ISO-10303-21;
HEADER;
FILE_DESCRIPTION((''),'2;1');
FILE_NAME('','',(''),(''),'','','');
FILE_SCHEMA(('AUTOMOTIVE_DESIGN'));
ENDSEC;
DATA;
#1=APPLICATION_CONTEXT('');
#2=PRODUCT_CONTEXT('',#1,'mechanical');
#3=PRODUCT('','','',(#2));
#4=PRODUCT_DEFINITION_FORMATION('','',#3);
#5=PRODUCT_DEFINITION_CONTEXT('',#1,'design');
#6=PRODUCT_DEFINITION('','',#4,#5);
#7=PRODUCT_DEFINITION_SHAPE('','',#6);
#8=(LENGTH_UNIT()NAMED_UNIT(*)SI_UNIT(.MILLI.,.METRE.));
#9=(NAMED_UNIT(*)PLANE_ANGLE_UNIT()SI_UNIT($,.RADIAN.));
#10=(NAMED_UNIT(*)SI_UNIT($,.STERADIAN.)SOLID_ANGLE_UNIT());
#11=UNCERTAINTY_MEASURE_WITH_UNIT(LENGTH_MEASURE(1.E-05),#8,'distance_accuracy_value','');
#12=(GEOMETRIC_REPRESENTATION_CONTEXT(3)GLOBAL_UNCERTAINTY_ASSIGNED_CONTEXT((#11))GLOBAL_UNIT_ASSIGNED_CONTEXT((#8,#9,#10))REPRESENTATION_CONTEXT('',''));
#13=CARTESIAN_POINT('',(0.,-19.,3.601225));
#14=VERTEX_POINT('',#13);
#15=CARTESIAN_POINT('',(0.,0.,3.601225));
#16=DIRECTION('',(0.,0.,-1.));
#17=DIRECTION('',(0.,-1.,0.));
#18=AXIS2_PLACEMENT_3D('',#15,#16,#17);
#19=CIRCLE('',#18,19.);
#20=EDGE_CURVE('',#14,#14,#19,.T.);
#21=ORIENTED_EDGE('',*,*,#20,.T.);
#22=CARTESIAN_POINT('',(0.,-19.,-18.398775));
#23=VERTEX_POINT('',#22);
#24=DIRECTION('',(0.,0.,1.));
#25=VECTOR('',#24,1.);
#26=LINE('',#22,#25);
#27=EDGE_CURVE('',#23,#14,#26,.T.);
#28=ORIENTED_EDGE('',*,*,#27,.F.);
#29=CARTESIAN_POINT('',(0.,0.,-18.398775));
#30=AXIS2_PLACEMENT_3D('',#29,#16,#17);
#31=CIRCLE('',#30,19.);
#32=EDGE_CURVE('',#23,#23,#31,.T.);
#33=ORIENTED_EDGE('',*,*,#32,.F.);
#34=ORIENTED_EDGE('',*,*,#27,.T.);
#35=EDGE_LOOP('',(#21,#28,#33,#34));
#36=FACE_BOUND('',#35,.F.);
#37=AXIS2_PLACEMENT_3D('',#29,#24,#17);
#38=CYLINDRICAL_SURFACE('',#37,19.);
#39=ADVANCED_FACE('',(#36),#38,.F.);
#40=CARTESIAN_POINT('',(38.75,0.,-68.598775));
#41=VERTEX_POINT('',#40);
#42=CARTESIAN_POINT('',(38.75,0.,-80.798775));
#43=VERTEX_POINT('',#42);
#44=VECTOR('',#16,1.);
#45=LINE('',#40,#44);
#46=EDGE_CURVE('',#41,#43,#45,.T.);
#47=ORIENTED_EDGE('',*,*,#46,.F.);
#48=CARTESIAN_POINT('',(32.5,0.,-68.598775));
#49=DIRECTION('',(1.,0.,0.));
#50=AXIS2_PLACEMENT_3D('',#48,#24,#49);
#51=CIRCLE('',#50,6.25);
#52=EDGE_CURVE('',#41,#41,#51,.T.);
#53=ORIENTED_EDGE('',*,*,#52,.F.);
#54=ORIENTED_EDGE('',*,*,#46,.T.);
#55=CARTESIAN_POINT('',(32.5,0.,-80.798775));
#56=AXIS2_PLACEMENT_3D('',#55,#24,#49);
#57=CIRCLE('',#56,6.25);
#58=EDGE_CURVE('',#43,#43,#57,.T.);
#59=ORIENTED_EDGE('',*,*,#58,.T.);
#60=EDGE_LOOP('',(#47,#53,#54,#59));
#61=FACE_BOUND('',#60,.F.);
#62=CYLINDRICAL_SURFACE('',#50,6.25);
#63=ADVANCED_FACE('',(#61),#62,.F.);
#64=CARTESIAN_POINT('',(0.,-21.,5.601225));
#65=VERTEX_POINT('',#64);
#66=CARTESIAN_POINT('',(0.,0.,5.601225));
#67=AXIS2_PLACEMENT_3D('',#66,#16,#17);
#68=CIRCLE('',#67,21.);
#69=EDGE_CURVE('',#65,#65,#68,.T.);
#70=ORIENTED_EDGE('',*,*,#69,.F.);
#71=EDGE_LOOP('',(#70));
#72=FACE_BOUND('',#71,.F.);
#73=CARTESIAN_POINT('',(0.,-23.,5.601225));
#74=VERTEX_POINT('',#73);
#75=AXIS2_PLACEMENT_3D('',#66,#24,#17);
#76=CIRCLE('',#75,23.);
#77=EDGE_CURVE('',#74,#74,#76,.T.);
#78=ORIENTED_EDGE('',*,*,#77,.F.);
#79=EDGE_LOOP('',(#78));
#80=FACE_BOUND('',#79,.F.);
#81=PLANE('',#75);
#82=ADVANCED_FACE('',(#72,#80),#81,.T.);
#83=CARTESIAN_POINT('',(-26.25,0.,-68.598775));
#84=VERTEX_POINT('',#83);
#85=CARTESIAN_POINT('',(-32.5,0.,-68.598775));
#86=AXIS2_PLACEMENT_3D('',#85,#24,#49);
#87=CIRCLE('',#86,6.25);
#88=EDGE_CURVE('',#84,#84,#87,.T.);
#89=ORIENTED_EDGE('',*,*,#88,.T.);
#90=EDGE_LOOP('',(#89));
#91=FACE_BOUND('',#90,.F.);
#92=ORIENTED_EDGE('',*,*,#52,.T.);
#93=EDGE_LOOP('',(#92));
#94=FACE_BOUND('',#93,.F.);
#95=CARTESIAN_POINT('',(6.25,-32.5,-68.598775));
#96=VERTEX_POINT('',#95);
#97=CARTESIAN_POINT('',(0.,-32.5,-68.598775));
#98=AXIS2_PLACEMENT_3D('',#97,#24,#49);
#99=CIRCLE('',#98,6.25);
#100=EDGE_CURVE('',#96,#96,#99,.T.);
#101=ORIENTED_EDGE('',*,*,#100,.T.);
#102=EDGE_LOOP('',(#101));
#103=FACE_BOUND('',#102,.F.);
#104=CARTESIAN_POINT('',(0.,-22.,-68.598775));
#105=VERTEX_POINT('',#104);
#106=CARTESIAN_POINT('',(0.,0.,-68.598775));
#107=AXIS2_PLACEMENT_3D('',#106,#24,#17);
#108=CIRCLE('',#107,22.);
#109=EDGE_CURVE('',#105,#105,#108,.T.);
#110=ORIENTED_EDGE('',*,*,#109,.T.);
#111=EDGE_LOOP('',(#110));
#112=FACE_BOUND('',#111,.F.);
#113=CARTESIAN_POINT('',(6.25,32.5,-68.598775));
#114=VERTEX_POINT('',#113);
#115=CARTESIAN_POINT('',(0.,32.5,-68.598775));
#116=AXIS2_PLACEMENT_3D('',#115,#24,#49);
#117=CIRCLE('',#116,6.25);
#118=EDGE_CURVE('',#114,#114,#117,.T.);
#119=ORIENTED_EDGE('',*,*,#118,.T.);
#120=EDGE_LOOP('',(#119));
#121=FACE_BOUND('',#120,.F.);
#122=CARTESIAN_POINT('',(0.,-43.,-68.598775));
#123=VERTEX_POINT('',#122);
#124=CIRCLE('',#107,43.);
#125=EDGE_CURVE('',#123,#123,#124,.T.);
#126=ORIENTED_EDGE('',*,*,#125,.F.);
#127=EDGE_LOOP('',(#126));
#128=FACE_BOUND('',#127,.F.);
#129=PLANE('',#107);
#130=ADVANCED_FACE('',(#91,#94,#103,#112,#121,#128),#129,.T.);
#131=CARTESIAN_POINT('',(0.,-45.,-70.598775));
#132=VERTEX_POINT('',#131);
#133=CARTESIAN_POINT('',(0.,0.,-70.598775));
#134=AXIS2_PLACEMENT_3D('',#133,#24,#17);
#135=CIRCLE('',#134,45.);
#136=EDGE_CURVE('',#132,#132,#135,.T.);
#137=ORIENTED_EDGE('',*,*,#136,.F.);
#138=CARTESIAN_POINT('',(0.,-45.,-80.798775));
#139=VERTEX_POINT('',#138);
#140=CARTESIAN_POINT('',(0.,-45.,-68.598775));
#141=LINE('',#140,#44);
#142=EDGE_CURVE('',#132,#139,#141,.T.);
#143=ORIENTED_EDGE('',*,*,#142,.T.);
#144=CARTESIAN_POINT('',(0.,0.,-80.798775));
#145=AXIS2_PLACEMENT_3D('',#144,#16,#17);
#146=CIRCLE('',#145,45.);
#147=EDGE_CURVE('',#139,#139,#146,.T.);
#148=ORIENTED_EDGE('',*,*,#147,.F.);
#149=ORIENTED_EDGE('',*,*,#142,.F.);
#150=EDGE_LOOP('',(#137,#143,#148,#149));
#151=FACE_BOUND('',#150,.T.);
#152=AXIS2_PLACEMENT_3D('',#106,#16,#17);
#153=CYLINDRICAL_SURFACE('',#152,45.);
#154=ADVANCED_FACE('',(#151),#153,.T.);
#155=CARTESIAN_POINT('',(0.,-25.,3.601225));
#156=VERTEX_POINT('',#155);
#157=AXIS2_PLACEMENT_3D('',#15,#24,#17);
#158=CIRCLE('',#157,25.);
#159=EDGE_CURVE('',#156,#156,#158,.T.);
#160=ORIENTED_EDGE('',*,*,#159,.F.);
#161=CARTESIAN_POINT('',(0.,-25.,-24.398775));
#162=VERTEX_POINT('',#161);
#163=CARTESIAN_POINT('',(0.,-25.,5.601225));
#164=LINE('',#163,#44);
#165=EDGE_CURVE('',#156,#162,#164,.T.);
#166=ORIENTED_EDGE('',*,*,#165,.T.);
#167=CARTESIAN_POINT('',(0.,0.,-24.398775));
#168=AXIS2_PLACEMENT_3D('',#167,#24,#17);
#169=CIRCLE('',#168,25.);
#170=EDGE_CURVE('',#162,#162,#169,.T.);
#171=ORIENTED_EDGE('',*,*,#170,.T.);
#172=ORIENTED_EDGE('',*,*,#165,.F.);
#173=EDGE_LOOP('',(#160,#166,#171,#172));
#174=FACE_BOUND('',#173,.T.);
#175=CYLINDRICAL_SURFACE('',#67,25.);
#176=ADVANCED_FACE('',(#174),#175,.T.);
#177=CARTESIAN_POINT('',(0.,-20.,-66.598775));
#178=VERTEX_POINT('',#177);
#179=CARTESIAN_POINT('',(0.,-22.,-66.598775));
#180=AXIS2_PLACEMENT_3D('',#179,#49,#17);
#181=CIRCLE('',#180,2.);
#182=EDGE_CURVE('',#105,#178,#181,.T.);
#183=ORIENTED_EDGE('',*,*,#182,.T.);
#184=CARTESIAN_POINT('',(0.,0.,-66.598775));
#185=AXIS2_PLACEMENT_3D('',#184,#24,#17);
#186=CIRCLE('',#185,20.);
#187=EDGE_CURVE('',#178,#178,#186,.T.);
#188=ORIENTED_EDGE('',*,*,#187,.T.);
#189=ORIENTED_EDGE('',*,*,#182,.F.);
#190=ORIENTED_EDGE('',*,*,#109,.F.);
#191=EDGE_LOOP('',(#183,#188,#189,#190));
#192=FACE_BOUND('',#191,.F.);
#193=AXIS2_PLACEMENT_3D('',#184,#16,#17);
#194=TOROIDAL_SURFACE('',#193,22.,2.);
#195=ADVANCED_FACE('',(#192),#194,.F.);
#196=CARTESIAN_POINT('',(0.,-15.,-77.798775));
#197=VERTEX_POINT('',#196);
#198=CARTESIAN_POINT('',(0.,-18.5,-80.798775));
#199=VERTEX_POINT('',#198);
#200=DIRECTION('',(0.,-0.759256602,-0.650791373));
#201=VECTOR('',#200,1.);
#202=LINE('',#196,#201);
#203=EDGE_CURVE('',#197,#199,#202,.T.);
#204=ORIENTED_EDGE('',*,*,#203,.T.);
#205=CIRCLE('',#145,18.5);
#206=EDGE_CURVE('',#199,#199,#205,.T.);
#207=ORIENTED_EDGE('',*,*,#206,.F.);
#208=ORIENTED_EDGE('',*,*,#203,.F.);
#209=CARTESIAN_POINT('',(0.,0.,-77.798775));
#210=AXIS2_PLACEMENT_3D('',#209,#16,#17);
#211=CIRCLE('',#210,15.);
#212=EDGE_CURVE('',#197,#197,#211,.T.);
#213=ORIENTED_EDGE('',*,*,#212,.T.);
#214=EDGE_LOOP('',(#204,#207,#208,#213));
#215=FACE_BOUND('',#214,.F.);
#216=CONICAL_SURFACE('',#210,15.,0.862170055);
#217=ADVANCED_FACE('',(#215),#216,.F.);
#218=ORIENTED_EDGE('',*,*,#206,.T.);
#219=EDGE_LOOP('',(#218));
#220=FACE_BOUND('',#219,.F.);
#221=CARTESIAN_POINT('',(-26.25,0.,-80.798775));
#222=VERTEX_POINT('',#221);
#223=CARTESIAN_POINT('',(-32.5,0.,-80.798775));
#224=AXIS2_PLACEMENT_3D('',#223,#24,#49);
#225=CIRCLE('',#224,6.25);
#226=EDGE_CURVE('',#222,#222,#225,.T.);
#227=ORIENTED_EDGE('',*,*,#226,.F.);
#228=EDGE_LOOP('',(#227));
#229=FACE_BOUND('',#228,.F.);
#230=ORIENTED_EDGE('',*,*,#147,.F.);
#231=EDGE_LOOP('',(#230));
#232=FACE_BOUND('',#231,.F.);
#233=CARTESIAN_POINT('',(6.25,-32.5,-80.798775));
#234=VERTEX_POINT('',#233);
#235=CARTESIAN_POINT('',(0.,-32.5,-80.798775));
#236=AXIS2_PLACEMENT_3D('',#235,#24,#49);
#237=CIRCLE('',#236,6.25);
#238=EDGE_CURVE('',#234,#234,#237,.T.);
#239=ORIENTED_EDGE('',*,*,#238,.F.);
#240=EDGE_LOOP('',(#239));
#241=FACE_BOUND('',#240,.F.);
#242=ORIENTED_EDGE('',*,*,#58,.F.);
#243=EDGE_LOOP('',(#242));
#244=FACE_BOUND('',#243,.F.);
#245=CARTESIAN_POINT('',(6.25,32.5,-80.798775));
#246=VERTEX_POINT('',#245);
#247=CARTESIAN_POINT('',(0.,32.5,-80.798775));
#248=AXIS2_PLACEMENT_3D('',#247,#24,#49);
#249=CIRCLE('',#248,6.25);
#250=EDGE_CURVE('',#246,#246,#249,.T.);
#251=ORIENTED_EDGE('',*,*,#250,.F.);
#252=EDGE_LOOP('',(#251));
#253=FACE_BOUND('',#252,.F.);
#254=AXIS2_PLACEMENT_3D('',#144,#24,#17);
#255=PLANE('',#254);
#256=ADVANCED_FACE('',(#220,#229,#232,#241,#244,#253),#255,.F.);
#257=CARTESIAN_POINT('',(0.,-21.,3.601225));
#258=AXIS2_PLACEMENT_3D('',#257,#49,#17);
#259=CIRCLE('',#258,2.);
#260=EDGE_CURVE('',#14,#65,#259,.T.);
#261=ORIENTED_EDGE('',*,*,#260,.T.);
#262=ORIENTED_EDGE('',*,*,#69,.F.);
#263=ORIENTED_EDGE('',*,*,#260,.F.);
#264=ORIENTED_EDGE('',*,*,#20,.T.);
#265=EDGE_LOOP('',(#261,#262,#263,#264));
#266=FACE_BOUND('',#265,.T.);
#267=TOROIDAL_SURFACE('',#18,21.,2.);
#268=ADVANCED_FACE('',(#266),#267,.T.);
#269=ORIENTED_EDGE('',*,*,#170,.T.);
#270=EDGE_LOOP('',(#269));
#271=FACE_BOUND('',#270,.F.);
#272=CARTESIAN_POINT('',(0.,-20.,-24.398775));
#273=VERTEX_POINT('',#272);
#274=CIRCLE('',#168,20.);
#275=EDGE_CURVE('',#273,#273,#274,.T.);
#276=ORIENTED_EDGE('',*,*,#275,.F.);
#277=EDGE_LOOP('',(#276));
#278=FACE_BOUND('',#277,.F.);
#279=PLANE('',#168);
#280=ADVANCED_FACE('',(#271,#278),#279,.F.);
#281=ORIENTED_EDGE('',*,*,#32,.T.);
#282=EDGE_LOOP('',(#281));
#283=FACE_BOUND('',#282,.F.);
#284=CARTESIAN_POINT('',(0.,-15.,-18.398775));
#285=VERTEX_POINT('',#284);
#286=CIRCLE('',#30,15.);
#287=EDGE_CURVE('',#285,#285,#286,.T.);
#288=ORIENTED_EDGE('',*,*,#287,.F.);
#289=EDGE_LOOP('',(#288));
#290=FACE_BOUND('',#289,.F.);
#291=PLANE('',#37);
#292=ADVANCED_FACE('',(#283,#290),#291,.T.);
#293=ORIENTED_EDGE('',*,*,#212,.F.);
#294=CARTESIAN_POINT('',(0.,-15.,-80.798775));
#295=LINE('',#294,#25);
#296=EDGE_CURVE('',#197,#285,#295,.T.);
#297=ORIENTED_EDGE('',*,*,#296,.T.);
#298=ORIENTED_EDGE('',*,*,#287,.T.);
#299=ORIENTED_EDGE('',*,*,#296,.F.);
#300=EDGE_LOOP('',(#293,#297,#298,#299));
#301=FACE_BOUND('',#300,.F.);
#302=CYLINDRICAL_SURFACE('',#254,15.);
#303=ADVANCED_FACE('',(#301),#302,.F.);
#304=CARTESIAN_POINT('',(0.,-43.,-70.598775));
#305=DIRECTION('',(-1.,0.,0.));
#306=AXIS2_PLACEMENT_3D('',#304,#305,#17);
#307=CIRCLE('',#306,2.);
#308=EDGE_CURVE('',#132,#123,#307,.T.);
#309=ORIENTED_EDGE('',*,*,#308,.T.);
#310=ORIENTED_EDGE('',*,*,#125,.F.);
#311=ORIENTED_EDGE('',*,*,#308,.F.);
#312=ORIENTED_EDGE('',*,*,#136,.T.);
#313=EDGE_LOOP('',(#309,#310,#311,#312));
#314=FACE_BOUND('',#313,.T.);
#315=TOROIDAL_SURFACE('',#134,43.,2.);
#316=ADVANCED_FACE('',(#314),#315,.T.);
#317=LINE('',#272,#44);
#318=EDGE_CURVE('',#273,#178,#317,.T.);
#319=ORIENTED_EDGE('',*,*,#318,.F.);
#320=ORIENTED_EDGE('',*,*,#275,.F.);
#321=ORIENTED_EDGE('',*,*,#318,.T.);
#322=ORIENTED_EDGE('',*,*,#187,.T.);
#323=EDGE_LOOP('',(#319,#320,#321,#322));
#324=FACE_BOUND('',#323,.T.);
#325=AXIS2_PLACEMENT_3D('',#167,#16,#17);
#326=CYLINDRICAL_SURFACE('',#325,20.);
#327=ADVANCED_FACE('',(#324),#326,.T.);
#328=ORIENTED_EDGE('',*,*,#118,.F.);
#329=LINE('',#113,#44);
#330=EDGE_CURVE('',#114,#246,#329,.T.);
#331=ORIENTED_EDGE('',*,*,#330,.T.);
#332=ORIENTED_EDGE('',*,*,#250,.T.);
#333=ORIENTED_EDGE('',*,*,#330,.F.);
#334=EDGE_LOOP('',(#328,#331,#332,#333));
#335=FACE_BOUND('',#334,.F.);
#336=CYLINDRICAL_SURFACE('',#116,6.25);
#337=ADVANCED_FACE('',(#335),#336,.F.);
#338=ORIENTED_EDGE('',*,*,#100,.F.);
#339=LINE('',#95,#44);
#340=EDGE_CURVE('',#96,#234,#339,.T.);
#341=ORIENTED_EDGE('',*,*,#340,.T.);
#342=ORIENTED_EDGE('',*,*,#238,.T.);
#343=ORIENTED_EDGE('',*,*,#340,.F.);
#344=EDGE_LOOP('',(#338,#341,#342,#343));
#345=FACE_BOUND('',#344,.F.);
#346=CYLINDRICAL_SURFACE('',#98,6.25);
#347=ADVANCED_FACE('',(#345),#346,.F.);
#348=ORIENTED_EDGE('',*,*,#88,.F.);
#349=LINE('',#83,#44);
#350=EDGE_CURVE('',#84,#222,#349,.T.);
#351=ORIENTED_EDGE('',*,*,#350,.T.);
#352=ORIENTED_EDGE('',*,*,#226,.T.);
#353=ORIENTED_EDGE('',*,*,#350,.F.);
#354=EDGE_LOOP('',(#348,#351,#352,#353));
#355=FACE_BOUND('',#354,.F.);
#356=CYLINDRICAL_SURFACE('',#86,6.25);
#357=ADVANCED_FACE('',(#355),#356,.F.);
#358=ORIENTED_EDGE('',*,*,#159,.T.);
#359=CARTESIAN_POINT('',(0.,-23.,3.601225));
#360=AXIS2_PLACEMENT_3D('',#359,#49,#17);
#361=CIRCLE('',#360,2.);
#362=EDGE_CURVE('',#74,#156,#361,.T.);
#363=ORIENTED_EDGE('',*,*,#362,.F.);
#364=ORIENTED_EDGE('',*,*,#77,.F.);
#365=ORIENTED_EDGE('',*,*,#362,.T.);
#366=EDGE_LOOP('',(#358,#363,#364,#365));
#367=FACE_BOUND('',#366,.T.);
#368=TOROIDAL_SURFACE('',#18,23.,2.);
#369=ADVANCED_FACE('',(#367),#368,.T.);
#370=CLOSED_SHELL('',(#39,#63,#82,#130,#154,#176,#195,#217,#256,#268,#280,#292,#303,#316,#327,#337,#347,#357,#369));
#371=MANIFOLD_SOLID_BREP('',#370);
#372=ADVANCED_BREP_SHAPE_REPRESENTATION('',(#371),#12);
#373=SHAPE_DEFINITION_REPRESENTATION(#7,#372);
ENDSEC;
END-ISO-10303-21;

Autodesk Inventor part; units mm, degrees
ref_plane "YZ Plane" through (0, 0, 0) normal (1, 0, 0) x (0, 1, 0)
ref_plane "XZ Plane" through (0, 0, 0) normal (0, 1, 0) x (-1, 0, 0)
ref_plane "XY Plane" through (0, 0, 0) normal (0, 0, 1) x (1, 0, 0)
sketch "Boceto1" plane through (0, 0, 0) normal (1, 0, 0) x (0, 1, 0)
  line L0 (25, 5.601225) -> (19, 5.601225)
  line L1 (19, 5.601225) -> (19, -18.398775)
  line L2 (19, -18.398775) -> (15, -18.398775)
  line L3 (15, -18.398775) -> (15, -80.798775)
  line L4 (15, -80.798775) -> (45, -80.798775)
  line L5 (45, -80.798775) -> (45, -68.598775)
  line L6 (45, -68.598775) -> (20, -68.598775)
  line L7 (20, -68.598775) -> (20, -24.398775)
  line L8 (20, -24.398775) -> (25, -24.398775)
  line L9 (25, -24.398775) -> (25, 5.601225)
  line L10 (0, 0) -> (0, 11.507163) construction
  line L11 (-25, 5.601225) -> (-19, 5.601225)
  line L12 (-19, 5.601225) -> (-19, -18.398775)
  line L13 (-19, -18.398775) -> (-15, -18.398775)
  line L14 (-15, -18.398775) -> (-15, -80.798775)
  line L15 (-15, -80.798775) -> (-45, -80.798775)
  line L16 (-45, -80.798775) -> (-45, -68.598775)
  line L17 (-45, -68.598775) -> (-20, -68.598775)
  line L18 (-20, -68.598775) -> (-20, -24.398775)
  line L19 (-20, -24.398775) -> (-25, -24.398775)
  line L20 (-25, -24.398775) -> (-25, 5.601225)
  dimension "d0" = 30
  dimension "d1" = 40
  dimension "d2" = 90
  dimension "d3" = 38
  dimension "d4" = 50
  dimension "d5" = 24
  dimension "d6" = 6
  dimension "d7" = 44.2
  dimension "d8" = 12.2
sketch "Boceto1 outline for Revolución1" plane through (0, 0, 0) normal (1, 0, 0) x (0, 1, 0)
  line L0 (-25, 5.601225) -> (-25, -24.398775)
  line L1 (-19, 5.601225) -> (-25, 5.601225)
  line L2 (-19, -18.398775) -> (-19, 5.601225)
  line L3 (-15, -18.398775) -> (-19, -18.398775)
  line L4 (-15, -80.798775) -> (-15, -18.398775)
  line L5 (-45, -80.798775) -> (-15, -80.798775)
  line L6 (-45, -68.598775) -> (-45, -80.798775)
  line L7 (-20, -68.598775) -> (-45, -68.598775)
  line L8 (-20, -24.398775) -> (-20, -68.598775)
  line L9 (-25, -24.398775) -> (-20, -24.398775)
  line L10 (25, 5.601225) -> (19, 5.601225)
  line L11 (25, -24.398775) -> (25, 5.601225)
  line L12 (20, -24.398775) -> (25, -24.398775)
  line L13 (20, -68.598775) -> (20, -24.398775)
  line L14 (45, -68.598775) -> (20, -68.598775)
  line L15 (45, -80.798775) -> (45, -68.598775)
  line L16 (15, -80.798775) -> (45, -80.798775)
  line L17 (15, -18.398775) -> (15, -80.798775)
  line L18 (19, -18.398775) -> (15, -18.398775)
  line L19 (19, 5.601225) -> (19, -18.398775)
revolve "Revolución1" add sketch "Boceto1 outline for Revolución1" angle 360 about axis through (0, 0, 0) along (0, 0, 1)
sketch "Boceto4" plane through (0, 0, -68.598775) normal (0, 0, 1) x (1, 0, 0)
  circle A0 centre (0, -32.5) radius 6.25
  circle A1 centre (0, 32.5) radius 6.25
  circle A2 centre (-32.5, 0) radius 6.25
  circle A3 centre (32.5, 0) radius 6.25
  circle A4 centre (0, -32.5) radius 6.25
  circle A5 centre (0, 32.5) radius 6.25
  circle A6 centre (32.5, 0) radius 6.25
  circle A7 centre (-32.5, 0) radius 6.25
  point P0 (0, 0)
  dimension "d18" = 12.5
  dimension "d19" = 12.5
  dimension "d20" = 65
  dimension "d21" = 32.5
  dimension "d24" = 360
sketch "Boceto4 outline for Extrusión1" plane through (0, 0, -68.598775) normal (0, 0, 1) x (1, 0, 0)
  circle A0 centre (-32.5, 0) radius 6.25
  circle A1 centre (0, -32.5) radius 6.25
  circle A2 centre (32.5, 0) radius 6.25
  circle A3 centre (0, 32.5) radius 6.25
extrude "Extrusión1" cut sketch "Boceto4 outline for Extrusión1" against normal through all
chamfer "Chaflán1" distance 3 distance2 3.5 1 edges at (0, 15, -80.7988) measured on face at (2.4062, -14.8058, -59.9988)
fillet "Empalme1" radius 2 4 edges at (0, 45, -68.5988) (0, 20, -68.5988) (0, 25, 5.6012) (0, 19, 5.6012)
properties part number "Pieza de practica 2"
